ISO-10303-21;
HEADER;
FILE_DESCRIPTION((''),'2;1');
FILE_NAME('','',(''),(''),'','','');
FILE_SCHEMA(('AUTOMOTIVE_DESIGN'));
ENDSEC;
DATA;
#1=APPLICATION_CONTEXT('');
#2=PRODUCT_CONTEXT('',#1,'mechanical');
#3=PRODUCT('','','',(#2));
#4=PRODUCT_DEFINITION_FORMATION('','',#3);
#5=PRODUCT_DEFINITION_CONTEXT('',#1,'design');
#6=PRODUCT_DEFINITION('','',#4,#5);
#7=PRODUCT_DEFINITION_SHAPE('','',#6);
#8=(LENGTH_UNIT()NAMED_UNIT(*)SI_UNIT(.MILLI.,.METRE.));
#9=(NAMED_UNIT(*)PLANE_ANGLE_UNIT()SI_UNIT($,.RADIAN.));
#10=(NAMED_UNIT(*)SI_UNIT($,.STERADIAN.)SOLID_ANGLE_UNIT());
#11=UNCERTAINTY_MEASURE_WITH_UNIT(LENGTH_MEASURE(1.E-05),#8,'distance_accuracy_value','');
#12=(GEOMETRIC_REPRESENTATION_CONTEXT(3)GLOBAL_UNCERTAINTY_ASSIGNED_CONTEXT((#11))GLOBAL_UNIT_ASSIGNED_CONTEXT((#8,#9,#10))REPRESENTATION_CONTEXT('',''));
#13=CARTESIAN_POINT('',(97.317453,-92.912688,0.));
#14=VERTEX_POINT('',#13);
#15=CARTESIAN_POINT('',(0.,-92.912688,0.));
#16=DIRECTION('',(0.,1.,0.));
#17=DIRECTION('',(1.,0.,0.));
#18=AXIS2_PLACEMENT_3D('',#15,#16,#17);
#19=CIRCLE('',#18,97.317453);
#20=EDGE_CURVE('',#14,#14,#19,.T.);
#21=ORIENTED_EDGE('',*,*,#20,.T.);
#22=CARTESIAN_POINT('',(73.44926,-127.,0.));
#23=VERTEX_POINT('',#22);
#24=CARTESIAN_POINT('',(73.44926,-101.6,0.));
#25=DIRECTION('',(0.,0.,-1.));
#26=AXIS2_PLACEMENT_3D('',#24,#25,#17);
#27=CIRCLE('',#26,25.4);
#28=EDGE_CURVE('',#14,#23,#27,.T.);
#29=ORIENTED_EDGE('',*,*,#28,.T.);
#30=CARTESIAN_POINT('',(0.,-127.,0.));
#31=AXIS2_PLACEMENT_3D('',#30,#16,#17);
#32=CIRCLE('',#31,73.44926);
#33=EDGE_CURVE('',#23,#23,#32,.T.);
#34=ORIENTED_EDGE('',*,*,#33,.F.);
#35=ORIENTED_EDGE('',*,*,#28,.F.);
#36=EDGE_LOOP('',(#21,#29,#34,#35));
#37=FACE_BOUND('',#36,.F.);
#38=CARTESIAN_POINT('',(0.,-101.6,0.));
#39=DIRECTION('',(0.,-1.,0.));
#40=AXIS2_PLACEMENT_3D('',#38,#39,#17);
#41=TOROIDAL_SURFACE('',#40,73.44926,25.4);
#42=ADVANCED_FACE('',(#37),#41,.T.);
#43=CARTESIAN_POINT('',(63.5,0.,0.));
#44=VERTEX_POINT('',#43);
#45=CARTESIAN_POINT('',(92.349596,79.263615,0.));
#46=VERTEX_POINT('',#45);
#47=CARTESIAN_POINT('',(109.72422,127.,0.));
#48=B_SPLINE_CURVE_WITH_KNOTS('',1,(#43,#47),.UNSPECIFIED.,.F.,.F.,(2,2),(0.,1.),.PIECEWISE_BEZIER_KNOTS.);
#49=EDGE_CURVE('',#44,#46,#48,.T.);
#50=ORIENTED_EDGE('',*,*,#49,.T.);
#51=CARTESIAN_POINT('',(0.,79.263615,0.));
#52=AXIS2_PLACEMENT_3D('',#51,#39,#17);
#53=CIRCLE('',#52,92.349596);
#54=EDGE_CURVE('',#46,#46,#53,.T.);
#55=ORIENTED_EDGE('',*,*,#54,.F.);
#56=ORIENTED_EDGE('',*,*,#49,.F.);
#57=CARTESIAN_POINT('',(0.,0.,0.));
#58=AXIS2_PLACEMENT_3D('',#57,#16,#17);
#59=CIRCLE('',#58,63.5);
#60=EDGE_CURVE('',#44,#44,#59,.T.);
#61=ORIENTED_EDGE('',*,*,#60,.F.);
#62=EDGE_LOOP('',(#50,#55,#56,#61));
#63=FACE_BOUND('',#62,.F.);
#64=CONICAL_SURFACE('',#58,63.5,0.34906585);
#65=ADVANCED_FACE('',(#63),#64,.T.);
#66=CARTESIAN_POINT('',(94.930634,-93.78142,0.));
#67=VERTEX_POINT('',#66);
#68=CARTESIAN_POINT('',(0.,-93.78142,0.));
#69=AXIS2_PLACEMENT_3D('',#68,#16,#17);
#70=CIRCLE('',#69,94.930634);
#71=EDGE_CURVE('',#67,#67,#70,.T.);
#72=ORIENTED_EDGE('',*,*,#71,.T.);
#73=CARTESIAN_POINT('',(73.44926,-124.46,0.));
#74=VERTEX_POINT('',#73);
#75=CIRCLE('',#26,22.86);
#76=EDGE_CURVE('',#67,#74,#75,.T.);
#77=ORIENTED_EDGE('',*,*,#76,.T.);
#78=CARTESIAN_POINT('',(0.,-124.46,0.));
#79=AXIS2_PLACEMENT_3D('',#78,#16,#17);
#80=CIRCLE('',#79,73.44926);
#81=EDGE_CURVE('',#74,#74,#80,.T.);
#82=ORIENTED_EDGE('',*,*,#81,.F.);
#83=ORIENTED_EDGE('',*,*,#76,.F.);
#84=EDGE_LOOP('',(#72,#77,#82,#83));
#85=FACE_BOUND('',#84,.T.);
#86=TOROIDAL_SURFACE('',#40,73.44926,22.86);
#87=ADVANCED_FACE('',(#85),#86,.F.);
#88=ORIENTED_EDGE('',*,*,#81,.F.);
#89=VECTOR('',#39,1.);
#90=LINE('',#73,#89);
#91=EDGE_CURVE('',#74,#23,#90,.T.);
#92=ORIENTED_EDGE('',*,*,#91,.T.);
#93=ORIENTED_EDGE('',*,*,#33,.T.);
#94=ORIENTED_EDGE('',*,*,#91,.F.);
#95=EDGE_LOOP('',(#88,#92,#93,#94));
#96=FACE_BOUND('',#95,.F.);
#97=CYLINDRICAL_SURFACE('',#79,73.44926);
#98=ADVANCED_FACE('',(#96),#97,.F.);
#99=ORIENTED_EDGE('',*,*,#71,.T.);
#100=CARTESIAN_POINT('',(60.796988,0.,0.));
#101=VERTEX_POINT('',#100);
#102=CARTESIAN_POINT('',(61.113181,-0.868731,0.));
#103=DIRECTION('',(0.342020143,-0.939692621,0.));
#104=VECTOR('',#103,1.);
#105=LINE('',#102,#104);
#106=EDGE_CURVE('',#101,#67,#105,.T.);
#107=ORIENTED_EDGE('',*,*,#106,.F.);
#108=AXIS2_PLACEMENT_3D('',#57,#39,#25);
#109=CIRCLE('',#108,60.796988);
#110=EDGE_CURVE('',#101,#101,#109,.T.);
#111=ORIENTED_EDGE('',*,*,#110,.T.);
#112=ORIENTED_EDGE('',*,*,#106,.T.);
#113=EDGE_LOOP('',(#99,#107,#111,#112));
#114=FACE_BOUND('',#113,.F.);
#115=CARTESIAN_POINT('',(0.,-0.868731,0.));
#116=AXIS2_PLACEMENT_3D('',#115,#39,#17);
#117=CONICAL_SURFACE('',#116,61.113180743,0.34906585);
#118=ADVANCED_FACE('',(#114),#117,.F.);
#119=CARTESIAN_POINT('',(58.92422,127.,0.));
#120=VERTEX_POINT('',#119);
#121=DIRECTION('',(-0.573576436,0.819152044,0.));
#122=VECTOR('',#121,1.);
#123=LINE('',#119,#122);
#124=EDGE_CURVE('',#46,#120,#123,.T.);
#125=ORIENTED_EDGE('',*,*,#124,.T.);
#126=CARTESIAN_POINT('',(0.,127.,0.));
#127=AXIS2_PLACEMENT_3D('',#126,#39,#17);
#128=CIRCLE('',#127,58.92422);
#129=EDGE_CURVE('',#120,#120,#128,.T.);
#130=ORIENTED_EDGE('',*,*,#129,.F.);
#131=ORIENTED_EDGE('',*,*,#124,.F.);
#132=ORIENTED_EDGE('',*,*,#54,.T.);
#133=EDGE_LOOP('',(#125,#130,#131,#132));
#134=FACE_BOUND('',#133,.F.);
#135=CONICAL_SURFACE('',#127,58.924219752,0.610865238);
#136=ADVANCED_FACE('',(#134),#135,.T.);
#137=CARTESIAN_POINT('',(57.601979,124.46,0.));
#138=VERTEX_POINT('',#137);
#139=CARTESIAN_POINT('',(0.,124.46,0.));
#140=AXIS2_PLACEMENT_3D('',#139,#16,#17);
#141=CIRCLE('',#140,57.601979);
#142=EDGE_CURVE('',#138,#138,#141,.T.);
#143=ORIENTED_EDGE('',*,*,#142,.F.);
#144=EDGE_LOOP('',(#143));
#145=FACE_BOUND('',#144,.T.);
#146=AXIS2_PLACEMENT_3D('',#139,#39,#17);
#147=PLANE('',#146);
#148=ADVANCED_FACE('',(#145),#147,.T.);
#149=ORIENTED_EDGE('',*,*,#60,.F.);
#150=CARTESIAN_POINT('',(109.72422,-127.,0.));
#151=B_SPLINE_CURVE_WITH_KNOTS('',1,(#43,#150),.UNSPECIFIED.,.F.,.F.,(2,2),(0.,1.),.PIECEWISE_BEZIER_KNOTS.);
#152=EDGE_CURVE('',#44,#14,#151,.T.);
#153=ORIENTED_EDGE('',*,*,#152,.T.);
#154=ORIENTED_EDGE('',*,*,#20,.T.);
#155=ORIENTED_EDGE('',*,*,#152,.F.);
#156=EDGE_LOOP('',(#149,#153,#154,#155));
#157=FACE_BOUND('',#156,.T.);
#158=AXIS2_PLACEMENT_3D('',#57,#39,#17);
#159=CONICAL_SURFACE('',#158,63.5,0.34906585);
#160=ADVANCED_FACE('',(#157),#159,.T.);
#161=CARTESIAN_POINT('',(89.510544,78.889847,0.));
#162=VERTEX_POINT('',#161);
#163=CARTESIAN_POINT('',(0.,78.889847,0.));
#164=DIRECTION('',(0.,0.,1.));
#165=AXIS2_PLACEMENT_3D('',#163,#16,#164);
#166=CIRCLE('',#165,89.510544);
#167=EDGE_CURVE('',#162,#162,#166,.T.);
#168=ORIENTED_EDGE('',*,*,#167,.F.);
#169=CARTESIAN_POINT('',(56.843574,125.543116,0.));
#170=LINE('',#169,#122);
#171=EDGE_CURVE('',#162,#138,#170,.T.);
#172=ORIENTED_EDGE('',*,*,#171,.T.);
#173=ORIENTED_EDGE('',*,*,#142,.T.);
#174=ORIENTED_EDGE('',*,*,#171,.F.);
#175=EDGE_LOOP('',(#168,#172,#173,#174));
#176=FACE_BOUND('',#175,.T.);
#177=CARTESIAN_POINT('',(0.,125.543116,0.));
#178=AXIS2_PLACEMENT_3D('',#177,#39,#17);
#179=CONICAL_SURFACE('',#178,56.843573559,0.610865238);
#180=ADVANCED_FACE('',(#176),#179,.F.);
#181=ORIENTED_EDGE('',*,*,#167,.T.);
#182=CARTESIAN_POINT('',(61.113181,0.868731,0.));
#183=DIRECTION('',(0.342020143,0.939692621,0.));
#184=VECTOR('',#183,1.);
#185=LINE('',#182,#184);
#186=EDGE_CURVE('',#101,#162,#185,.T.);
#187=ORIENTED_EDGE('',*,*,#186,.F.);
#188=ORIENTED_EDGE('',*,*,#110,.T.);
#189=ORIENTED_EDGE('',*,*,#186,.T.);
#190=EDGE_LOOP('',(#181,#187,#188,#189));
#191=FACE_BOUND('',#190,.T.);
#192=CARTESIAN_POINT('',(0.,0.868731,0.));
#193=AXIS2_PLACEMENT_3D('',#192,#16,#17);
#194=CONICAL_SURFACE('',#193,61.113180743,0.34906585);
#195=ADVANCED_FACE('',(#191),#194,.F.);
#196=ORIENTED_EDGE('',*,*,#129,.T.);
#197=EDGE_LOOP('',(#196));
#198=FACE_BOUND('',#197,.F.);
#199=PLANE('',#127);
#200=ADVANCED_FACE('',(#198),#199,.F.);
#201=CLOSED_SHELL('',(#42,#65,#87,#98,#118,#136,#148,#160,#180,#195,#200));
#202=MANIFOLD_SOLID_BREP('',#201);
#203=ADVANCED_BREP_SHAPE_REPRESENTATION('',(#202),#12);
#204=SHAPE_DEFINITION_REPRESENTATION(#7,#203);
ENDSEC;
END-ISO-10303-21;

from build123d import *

# Parameters (mm, degrees)
F0_R     = 63.5
F1_DEPTH = 127
F1_TAPER = -20
F2_SIZE  = 50.8
F3_R     = 25.4
F4_T     = -2.54


# Not quite as in the source:
# - a shell that OpenCascade refuses in one call is made with other operations: the cavity is built on its own and cut out


with BuildPart() as f1:
    # F0 (on Front) → F1 (new body, symmetric)
    with BuildSketch(Plane.XZ):
        Circle(F0_R)
    extrude(amount=F1_DEPTH, both=True, taper=F1_TAPER)

    # F2
    f2_edges = [f1.edges().sort_by_distance(p)[0] for p in [
        (-109.72422, 127, 0),
    ]]
    chamfer(f2_edges, length=F2_SIZE)

    # F3
    f3_edges = [f1.edges().sort_by_distance(p)[0] for p in [
        (-109.72422, -127, 0),
    ]]
    fillet(f3_edges, radius=F3_R)

    # F4: a shell. OpenCascade refuses it in one call, so the cavity is built on its own and cut out:
    # the body offset inwards by the wall thickness, plus a prism from it out through each open face.
    f4_core = offset(f1.part, amount=F4_T, kind=Kind.INTERSECTION, mode=Mode.PRIVATE)
    f4_exits = [f4_core.faces().sort_by_distance(p)[0] for p in [
        (0, -124.46, 0),
    ]]
    add(f4_core, mode=Mode.SUBTRACT)
    extrude(f4_exits, amount=-F4_T, mode=Mode.SUBTRACT)


solid = f1.part
